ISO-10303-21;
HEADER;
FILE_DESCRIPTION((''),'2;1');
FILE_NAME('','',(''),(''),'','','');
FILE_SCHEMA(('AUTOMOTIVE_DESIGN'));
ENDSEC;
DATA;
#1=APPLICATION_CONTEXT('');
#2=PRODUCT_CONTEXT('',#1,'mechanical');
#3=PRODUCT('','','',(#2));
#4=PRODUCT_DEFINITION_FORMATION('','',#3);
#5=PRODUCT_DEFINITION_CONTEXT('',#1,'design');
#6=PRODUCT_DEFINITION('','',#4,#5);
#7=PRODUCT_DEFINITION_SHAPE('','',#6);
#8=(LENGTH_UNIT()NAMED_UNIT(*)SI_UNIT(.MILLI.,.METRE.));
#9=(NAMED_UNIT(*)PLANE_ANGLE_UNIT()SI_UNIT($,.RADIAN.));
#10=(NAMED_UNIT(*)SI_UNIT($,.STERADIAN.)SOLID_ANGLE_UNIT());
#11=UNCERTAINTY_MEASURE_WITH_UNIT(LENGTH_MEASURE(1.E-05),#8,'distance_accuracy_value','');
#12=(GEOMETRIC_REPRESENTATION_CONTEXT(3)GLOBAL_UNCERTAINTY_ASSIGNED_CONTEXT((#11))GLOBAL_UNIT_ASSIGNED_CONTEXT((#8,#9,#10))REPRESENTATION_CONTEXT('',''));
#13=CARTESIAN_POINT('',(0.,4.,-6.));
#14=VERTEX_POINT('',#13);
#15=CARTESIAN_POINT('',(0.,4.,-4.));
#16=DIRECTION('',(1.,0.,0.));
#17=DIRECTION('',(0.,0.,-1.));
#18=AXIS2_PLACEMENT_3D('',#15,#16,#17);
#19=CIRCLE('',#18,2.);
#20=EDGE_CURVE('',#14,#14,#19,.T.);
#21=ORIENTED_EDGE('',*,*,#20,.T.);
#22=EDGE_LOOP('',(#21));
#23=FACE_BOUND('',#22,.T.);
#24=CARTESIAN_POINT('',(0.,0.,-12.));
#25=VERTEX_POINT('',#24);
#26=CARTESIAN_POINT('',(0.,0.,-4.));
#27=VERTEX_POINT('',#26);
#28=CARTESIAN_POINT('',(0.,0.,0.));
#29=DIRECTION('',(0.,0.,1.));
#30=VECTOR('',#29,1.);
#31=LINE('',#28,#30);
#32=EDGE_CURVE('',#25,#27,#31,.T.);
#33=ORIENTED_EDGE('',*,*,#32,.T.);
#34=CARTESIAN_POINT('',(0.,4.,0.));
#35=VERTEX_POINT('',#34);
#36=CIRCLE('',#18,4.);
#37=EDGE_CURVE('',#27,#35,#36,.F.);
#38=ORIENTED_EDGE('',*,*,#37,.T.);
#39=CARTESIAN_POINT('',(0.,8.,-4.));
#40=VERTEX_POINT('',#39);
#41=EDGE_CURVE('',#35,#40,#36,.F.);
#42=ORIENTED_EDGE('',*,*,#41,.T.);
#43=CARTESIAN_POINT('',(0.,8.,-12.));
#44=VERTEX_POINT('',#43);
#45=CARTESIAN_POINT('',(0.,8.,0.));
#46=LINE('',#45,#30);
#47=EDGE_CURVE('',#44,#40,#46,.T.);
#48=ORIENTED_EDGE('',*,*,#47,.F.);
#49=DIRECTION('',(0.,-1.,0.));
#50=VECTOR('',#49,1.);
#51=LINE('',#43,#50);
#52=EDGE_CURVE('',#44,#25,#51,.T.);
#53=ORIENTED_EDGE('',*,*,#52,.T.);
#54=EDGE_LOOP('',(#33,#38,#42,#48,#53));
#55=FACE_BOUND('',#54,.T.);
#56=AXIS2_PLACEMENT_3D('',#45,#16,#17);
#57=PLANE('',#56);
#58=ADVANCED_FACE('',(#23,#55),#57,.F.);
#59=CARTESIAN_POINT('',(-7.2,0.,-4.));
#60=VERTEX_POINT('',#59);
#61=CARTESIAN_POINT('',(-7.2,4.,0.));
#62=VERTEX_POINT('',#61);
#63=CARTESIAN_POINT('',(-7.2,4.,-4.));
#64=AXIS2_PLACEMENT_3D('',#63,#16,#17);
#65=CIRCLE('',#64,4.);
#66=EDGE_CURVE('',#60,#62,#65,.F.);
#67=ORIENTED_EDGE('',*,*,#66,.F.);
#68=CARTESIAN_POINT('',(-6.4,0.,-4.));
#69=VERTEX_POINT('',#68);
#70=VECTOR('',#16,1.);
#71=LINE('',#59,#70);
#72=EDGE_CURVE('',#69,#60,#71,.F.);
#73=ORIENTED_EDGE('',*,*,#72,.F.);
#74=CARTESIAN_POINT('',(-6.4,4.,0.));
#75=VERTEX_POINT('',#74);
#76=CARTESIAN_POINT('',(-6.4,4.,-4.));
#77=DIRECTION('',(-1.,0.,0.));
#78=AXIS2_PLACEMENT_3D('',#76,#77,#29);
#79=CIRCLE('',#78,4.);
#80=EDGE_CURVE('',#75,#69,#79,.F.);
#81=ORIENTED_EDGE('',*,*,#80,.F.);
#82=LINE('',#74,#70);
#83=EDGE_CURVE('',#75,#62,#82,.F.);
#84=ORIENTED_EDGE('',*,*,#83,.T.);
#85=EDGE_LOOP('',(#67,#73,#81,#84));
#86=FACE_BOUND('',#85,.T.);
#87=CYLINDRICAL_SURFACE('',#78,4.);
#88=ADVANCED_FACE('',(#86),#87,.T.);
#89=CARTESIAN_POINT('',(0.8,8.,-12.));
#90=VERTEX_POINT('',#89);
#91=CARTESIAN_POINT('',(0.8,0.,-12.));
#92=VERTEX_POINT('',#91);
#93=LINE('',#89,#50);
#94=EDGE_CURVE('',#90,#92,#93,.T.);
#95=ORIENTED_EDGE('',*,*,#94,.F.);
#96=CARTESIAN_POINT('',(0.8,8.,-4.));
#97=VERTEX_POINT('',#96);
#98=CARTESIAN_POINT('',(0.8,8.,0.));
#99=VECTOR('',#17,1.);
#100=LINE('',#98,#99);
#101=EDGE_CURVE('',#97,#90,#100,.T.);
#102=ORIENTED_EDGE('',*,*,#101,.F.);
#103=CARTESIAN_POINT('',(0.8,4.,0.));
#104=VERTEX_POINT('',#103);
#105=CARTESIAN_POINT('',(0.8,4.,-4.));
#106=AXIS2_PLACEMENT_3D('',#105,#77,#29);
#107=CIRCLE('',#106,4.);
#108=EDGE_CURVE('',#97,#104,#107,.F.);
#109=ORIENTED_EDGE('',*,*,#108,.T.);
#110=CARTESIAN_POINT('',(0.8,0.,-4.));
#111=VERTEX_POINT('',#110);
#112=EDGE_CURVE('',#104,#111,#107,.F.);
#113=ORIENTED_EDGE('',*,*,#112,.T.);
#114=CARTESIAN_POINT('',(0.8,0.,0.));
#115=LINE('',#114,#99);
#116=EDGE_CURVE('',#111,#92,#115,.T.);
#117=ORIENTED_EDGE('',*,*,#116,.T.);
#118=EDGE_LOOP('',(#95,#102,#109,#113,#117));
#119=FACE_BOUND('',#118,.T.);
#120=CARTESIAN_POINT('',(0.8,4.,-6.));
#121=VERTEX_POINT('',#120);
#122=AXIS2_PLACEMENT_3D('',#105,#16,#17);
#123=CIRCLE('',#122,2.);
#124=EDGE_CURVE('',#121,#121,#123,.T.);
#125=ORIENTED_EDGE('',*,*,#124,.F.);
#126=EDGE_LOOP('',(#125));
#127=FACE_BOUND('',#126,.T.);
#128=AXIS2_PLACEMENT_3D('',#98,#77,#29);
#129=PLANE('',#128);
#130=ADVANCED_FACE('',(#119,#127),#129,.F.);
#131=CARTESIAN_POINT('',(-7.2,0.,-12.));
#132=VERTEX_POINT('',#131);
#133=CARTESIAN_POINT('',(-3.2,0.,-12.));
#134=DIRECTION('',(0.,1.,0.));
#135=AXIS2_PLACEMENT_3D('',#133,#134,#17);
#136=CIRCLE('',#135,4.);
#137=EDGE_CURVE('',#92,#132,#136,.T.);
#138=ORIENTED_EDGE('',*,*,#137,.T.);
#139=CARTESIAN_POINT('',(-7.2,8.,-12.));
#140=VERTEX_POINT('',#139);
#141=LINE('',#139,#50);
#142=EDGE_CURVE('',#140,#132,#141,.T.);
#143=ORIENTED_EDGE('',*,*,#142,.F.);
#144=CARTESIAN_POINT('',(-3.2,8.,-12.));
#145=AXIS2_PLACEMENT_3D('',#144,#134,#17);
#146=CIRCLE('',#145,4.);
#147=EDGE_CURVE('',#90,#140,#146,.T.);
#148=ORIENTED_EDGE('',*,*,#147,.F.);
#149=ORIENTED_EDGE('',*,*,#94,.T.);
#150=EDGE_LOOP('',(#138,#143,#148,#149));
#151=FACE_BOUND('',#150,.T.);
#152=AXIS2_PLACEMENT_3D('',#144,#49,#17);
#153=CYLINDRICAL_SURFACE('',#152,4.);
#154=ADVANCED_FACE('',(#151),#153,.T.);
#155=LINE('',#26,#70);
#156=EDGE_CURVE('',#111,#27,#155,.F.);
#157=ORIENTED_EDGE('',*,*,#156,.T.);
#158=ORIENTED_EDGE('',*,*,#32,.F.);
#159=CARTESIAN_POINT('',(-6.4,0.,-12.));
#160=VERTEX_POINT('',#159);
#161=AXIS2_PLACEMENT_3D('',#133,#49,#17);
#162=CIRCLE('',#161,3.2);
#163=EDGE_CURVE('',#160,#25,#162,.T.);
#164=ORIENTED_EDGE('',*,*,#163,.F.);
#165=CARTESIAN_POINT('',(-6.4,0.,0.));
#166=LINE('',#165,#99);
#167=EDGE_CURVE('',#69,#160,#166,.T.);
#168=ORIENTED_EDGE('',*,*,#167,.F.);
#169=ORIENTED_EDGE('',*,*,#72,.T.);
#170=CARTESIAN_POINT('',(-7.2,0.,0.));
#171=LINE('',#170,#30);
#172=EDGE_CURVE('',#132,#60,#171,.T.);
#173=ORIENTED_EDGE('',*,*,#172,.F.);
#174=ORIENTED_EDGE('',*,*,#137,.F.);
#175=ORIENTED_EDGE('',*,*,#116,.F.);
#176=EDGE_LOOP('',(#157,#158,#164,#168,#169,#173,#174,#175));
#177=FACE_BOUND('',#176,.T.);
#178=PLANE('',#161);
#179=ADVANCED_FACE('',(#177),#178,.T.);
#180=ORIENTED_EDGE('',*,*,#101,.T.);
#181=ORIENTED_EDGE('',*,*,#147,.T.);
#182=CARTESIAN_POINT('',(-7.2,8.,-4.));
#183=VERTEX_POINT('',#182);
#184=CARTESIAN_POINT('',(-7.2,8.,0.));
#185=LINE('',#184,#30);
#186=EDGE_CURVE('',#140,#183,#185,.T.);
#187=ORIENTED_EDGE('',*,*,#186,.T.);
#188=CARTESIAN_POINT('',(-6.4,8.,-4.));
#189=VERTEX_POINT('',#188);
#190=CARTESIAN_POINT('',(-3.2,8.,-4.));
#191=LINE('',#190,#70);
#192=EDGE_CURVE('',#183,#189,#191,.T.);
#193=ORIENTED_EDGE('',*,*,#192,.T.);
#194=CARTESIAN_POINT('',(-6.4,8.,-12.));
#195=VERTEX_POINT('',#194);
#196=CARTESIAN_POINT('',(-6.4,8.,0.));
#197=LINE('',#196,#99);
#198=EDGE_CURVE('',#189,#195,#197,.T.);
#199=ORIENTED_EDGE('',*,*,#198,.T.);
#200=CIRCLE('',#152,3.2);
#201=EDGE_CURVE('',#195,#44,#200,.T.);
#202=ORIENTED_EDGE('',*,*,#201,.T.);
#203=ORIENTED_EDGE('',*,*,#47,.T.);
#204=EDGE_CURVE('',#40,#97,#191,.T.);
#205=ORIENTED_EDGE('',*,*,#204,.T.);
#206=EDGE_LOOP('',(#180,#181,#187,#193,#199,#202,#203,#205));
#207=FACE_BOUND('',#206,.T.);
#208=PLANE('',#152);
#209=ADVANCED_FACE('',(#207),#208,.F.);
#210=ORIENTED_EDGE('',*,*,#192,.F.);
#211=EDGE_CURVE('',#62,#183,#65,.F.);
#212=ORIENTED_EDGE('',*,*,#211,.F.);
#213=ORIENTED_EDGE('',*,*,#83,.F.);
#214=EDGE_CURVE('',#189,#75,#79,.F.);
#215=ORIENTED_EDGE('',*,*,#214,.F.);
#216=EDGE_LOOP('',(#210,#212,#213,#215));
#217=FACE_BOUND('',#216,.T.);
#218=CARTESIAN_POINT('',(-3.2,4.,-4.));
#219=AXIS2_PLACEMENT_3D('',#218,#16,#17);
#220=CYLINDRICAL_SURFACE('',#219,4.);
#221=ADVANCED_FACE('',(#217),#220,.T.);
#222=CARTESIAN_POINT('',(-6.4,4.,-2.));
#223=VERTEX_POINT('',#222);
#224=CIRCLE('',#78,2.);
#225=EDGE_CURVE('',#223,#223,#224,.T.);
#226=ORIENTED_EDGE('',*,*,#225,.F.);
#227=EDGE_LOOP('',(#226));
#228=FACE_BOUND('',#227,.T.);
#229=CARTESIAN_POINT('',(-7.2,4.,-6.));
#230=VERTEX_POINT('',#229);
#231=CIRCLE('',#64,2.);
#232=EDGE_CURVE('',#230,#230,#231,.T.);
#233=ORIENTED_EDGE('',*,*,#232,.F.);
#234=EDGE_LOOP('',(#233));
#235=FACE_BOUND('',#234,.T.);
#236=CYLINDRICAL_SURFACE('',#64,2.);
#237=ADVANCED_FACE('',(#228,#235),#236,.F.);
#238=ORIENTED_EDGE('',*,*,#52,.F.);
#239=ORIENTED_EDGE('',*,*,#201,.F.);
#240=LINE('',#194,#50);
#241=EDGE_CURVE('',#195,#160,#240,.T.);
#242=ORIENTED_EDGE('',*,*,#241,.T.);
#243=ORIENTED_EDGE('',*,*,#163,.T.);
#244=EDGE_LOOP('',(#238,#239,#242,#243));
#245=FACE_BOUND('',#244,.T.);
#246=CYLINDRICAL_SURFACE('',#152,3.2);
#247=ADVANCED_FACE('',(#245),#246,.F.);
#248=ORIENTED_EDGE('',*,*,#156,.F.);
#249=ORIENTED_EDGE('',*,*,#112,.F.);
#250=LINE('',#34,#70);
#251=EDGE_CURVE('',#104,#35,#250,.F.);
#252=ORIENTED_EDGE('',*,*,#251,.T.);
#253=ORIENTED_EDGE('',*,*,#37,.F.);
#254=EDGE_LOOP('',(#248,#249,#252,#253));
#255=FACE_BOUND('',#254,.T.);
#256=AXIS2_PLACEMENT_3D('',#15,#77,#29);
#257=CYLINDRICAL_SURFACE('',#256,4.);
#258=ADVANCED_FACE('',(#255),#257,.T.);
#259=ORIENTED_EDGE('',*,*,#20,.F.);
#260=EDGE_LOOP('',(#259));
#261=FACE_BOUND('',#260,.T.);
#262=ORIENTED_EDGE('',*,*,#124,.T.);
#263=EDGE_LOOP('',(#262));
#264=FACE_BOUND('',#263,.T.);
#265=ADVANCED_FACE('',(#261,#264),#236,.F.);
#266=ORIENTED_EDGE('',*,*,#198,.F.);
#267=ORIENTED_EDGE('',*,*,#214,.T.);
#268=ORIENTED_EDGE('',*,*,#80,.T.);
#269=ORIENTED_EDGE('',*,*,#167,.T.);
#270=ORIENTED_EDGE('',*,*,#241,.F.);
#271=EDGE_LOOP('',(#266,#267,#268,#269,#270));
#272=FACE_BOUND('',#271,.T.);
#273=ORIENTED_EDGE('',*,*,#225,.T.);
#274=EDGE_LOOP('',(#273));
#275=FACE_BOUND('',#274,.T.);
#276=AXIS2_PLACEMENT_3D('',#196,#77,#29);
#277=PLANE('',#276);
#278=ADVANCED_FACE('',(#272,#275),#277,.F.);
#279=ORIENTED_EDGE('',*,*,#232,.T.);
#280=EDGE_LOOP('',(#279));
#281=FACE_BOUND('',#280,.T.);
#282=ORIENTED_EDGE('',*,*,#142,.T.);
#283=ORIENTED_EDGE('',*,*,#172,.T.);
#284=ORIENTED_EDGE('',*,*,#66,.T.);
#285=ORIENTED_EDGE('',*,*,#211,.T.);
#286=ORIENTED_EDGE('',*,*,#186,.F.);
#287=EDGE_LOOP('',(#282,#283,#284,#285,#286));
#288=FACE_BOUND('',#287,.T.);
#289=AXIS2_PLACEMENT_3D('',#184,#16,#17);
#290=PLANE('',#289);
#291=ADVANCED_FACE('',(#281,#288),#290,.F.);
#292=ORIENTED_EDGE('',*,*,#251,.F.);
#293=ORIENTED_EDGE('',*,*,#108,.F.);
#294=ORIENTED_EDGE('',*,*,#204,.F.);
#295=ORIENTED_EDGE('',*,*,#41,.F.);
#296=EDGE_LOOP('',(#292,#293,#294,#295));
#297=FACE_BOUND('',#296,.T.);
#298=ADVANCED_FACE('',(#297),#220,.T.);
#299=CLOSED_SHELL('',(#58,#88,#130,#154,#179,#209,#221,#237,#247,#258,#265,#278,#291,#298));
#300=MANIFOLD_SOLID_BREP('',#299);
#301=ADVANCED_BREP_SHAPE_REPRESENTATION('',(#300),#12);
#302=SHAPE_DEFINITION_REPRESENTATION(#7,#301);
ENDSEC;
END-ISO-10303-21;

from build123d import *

# Parameters (mm, degrees)
BOSS_EXTRUDE1_DEPTH = 8
FILLET1_R           = 4
FILLET2_R           = 4
FILLET3_R           = 4
SKETCH2_R           = 2
CUT_EXTRUDE1_DEPTH  = 20.595917942


with BuildPart() as part:
    # Sketch1 → Boss-Extrude1 (new body)
    with BuildSketch(Plane(origin=(0, 0, 0), x_dir=(1, 0, 0), z_dir=(0, 1, 0))):
        with BuildLine():
            Line((0, 0), (0, 12))
            ThreePointArc((0, 12), (-3.2, 15.2), (-6.4, 12))
            Line((-6.4, 12), (-6.4, 0))
            Line((-6.4, 0), (-7.2, 0))
            Line((-7.2, 0), (-7.2, 12))
            ThreePointArc((-7.2, 12), (-3.2, 16), (0.8, 12))
            Line((0.8, 12), (0.8, 0))
            Line((0.8, 0), (0, 0))
        make_face()
    extrude(amount=BOSS_EXTRUDE1_DEPTH)

    # Fillet1
    fillet1_edges = [part.edges().sort_by_distance(p)[0] for p in [
        (0.4, 8, 0),
    ]]
    fillet(fillet1_edges, radius=FILLET1_R)

    # Fillet2
    fillet2_edges = [part.edges().sort_by_distance(p)[0] for p in [
        (0.4, 0, 0),
    ]]
    fillet(fillet2_edges, radius=FILLET2_R - 0.0001)  # a hair under: the kernel refuses the full size

    # Fillet3
    fillet3_edges = [part.edges().sort_by_distance(p)[0] for p in [
        (-6.8, 0, 0),
        (-6.8, 8, 0),
    ]]
    fillet(fillet3_edges, radius=FILLET3_R - 0.0001)  # a hair under: the kernel refuses the full size

    # Sketch2 → Cut-Extrude1 (cut, through all)
    with BuildSketch(Plane(origin=(0.8, 0, 0), x_dir=(0, 0, -1), z_dir=(1, 0, 0))):
        with Locations((4, 4)):
            Circle(SKETCH2_R)
    extrude(amount=-CUT_EXTRUDE1_DEPTH, mode=Mode.SUBTRACT)


solid = part.part
